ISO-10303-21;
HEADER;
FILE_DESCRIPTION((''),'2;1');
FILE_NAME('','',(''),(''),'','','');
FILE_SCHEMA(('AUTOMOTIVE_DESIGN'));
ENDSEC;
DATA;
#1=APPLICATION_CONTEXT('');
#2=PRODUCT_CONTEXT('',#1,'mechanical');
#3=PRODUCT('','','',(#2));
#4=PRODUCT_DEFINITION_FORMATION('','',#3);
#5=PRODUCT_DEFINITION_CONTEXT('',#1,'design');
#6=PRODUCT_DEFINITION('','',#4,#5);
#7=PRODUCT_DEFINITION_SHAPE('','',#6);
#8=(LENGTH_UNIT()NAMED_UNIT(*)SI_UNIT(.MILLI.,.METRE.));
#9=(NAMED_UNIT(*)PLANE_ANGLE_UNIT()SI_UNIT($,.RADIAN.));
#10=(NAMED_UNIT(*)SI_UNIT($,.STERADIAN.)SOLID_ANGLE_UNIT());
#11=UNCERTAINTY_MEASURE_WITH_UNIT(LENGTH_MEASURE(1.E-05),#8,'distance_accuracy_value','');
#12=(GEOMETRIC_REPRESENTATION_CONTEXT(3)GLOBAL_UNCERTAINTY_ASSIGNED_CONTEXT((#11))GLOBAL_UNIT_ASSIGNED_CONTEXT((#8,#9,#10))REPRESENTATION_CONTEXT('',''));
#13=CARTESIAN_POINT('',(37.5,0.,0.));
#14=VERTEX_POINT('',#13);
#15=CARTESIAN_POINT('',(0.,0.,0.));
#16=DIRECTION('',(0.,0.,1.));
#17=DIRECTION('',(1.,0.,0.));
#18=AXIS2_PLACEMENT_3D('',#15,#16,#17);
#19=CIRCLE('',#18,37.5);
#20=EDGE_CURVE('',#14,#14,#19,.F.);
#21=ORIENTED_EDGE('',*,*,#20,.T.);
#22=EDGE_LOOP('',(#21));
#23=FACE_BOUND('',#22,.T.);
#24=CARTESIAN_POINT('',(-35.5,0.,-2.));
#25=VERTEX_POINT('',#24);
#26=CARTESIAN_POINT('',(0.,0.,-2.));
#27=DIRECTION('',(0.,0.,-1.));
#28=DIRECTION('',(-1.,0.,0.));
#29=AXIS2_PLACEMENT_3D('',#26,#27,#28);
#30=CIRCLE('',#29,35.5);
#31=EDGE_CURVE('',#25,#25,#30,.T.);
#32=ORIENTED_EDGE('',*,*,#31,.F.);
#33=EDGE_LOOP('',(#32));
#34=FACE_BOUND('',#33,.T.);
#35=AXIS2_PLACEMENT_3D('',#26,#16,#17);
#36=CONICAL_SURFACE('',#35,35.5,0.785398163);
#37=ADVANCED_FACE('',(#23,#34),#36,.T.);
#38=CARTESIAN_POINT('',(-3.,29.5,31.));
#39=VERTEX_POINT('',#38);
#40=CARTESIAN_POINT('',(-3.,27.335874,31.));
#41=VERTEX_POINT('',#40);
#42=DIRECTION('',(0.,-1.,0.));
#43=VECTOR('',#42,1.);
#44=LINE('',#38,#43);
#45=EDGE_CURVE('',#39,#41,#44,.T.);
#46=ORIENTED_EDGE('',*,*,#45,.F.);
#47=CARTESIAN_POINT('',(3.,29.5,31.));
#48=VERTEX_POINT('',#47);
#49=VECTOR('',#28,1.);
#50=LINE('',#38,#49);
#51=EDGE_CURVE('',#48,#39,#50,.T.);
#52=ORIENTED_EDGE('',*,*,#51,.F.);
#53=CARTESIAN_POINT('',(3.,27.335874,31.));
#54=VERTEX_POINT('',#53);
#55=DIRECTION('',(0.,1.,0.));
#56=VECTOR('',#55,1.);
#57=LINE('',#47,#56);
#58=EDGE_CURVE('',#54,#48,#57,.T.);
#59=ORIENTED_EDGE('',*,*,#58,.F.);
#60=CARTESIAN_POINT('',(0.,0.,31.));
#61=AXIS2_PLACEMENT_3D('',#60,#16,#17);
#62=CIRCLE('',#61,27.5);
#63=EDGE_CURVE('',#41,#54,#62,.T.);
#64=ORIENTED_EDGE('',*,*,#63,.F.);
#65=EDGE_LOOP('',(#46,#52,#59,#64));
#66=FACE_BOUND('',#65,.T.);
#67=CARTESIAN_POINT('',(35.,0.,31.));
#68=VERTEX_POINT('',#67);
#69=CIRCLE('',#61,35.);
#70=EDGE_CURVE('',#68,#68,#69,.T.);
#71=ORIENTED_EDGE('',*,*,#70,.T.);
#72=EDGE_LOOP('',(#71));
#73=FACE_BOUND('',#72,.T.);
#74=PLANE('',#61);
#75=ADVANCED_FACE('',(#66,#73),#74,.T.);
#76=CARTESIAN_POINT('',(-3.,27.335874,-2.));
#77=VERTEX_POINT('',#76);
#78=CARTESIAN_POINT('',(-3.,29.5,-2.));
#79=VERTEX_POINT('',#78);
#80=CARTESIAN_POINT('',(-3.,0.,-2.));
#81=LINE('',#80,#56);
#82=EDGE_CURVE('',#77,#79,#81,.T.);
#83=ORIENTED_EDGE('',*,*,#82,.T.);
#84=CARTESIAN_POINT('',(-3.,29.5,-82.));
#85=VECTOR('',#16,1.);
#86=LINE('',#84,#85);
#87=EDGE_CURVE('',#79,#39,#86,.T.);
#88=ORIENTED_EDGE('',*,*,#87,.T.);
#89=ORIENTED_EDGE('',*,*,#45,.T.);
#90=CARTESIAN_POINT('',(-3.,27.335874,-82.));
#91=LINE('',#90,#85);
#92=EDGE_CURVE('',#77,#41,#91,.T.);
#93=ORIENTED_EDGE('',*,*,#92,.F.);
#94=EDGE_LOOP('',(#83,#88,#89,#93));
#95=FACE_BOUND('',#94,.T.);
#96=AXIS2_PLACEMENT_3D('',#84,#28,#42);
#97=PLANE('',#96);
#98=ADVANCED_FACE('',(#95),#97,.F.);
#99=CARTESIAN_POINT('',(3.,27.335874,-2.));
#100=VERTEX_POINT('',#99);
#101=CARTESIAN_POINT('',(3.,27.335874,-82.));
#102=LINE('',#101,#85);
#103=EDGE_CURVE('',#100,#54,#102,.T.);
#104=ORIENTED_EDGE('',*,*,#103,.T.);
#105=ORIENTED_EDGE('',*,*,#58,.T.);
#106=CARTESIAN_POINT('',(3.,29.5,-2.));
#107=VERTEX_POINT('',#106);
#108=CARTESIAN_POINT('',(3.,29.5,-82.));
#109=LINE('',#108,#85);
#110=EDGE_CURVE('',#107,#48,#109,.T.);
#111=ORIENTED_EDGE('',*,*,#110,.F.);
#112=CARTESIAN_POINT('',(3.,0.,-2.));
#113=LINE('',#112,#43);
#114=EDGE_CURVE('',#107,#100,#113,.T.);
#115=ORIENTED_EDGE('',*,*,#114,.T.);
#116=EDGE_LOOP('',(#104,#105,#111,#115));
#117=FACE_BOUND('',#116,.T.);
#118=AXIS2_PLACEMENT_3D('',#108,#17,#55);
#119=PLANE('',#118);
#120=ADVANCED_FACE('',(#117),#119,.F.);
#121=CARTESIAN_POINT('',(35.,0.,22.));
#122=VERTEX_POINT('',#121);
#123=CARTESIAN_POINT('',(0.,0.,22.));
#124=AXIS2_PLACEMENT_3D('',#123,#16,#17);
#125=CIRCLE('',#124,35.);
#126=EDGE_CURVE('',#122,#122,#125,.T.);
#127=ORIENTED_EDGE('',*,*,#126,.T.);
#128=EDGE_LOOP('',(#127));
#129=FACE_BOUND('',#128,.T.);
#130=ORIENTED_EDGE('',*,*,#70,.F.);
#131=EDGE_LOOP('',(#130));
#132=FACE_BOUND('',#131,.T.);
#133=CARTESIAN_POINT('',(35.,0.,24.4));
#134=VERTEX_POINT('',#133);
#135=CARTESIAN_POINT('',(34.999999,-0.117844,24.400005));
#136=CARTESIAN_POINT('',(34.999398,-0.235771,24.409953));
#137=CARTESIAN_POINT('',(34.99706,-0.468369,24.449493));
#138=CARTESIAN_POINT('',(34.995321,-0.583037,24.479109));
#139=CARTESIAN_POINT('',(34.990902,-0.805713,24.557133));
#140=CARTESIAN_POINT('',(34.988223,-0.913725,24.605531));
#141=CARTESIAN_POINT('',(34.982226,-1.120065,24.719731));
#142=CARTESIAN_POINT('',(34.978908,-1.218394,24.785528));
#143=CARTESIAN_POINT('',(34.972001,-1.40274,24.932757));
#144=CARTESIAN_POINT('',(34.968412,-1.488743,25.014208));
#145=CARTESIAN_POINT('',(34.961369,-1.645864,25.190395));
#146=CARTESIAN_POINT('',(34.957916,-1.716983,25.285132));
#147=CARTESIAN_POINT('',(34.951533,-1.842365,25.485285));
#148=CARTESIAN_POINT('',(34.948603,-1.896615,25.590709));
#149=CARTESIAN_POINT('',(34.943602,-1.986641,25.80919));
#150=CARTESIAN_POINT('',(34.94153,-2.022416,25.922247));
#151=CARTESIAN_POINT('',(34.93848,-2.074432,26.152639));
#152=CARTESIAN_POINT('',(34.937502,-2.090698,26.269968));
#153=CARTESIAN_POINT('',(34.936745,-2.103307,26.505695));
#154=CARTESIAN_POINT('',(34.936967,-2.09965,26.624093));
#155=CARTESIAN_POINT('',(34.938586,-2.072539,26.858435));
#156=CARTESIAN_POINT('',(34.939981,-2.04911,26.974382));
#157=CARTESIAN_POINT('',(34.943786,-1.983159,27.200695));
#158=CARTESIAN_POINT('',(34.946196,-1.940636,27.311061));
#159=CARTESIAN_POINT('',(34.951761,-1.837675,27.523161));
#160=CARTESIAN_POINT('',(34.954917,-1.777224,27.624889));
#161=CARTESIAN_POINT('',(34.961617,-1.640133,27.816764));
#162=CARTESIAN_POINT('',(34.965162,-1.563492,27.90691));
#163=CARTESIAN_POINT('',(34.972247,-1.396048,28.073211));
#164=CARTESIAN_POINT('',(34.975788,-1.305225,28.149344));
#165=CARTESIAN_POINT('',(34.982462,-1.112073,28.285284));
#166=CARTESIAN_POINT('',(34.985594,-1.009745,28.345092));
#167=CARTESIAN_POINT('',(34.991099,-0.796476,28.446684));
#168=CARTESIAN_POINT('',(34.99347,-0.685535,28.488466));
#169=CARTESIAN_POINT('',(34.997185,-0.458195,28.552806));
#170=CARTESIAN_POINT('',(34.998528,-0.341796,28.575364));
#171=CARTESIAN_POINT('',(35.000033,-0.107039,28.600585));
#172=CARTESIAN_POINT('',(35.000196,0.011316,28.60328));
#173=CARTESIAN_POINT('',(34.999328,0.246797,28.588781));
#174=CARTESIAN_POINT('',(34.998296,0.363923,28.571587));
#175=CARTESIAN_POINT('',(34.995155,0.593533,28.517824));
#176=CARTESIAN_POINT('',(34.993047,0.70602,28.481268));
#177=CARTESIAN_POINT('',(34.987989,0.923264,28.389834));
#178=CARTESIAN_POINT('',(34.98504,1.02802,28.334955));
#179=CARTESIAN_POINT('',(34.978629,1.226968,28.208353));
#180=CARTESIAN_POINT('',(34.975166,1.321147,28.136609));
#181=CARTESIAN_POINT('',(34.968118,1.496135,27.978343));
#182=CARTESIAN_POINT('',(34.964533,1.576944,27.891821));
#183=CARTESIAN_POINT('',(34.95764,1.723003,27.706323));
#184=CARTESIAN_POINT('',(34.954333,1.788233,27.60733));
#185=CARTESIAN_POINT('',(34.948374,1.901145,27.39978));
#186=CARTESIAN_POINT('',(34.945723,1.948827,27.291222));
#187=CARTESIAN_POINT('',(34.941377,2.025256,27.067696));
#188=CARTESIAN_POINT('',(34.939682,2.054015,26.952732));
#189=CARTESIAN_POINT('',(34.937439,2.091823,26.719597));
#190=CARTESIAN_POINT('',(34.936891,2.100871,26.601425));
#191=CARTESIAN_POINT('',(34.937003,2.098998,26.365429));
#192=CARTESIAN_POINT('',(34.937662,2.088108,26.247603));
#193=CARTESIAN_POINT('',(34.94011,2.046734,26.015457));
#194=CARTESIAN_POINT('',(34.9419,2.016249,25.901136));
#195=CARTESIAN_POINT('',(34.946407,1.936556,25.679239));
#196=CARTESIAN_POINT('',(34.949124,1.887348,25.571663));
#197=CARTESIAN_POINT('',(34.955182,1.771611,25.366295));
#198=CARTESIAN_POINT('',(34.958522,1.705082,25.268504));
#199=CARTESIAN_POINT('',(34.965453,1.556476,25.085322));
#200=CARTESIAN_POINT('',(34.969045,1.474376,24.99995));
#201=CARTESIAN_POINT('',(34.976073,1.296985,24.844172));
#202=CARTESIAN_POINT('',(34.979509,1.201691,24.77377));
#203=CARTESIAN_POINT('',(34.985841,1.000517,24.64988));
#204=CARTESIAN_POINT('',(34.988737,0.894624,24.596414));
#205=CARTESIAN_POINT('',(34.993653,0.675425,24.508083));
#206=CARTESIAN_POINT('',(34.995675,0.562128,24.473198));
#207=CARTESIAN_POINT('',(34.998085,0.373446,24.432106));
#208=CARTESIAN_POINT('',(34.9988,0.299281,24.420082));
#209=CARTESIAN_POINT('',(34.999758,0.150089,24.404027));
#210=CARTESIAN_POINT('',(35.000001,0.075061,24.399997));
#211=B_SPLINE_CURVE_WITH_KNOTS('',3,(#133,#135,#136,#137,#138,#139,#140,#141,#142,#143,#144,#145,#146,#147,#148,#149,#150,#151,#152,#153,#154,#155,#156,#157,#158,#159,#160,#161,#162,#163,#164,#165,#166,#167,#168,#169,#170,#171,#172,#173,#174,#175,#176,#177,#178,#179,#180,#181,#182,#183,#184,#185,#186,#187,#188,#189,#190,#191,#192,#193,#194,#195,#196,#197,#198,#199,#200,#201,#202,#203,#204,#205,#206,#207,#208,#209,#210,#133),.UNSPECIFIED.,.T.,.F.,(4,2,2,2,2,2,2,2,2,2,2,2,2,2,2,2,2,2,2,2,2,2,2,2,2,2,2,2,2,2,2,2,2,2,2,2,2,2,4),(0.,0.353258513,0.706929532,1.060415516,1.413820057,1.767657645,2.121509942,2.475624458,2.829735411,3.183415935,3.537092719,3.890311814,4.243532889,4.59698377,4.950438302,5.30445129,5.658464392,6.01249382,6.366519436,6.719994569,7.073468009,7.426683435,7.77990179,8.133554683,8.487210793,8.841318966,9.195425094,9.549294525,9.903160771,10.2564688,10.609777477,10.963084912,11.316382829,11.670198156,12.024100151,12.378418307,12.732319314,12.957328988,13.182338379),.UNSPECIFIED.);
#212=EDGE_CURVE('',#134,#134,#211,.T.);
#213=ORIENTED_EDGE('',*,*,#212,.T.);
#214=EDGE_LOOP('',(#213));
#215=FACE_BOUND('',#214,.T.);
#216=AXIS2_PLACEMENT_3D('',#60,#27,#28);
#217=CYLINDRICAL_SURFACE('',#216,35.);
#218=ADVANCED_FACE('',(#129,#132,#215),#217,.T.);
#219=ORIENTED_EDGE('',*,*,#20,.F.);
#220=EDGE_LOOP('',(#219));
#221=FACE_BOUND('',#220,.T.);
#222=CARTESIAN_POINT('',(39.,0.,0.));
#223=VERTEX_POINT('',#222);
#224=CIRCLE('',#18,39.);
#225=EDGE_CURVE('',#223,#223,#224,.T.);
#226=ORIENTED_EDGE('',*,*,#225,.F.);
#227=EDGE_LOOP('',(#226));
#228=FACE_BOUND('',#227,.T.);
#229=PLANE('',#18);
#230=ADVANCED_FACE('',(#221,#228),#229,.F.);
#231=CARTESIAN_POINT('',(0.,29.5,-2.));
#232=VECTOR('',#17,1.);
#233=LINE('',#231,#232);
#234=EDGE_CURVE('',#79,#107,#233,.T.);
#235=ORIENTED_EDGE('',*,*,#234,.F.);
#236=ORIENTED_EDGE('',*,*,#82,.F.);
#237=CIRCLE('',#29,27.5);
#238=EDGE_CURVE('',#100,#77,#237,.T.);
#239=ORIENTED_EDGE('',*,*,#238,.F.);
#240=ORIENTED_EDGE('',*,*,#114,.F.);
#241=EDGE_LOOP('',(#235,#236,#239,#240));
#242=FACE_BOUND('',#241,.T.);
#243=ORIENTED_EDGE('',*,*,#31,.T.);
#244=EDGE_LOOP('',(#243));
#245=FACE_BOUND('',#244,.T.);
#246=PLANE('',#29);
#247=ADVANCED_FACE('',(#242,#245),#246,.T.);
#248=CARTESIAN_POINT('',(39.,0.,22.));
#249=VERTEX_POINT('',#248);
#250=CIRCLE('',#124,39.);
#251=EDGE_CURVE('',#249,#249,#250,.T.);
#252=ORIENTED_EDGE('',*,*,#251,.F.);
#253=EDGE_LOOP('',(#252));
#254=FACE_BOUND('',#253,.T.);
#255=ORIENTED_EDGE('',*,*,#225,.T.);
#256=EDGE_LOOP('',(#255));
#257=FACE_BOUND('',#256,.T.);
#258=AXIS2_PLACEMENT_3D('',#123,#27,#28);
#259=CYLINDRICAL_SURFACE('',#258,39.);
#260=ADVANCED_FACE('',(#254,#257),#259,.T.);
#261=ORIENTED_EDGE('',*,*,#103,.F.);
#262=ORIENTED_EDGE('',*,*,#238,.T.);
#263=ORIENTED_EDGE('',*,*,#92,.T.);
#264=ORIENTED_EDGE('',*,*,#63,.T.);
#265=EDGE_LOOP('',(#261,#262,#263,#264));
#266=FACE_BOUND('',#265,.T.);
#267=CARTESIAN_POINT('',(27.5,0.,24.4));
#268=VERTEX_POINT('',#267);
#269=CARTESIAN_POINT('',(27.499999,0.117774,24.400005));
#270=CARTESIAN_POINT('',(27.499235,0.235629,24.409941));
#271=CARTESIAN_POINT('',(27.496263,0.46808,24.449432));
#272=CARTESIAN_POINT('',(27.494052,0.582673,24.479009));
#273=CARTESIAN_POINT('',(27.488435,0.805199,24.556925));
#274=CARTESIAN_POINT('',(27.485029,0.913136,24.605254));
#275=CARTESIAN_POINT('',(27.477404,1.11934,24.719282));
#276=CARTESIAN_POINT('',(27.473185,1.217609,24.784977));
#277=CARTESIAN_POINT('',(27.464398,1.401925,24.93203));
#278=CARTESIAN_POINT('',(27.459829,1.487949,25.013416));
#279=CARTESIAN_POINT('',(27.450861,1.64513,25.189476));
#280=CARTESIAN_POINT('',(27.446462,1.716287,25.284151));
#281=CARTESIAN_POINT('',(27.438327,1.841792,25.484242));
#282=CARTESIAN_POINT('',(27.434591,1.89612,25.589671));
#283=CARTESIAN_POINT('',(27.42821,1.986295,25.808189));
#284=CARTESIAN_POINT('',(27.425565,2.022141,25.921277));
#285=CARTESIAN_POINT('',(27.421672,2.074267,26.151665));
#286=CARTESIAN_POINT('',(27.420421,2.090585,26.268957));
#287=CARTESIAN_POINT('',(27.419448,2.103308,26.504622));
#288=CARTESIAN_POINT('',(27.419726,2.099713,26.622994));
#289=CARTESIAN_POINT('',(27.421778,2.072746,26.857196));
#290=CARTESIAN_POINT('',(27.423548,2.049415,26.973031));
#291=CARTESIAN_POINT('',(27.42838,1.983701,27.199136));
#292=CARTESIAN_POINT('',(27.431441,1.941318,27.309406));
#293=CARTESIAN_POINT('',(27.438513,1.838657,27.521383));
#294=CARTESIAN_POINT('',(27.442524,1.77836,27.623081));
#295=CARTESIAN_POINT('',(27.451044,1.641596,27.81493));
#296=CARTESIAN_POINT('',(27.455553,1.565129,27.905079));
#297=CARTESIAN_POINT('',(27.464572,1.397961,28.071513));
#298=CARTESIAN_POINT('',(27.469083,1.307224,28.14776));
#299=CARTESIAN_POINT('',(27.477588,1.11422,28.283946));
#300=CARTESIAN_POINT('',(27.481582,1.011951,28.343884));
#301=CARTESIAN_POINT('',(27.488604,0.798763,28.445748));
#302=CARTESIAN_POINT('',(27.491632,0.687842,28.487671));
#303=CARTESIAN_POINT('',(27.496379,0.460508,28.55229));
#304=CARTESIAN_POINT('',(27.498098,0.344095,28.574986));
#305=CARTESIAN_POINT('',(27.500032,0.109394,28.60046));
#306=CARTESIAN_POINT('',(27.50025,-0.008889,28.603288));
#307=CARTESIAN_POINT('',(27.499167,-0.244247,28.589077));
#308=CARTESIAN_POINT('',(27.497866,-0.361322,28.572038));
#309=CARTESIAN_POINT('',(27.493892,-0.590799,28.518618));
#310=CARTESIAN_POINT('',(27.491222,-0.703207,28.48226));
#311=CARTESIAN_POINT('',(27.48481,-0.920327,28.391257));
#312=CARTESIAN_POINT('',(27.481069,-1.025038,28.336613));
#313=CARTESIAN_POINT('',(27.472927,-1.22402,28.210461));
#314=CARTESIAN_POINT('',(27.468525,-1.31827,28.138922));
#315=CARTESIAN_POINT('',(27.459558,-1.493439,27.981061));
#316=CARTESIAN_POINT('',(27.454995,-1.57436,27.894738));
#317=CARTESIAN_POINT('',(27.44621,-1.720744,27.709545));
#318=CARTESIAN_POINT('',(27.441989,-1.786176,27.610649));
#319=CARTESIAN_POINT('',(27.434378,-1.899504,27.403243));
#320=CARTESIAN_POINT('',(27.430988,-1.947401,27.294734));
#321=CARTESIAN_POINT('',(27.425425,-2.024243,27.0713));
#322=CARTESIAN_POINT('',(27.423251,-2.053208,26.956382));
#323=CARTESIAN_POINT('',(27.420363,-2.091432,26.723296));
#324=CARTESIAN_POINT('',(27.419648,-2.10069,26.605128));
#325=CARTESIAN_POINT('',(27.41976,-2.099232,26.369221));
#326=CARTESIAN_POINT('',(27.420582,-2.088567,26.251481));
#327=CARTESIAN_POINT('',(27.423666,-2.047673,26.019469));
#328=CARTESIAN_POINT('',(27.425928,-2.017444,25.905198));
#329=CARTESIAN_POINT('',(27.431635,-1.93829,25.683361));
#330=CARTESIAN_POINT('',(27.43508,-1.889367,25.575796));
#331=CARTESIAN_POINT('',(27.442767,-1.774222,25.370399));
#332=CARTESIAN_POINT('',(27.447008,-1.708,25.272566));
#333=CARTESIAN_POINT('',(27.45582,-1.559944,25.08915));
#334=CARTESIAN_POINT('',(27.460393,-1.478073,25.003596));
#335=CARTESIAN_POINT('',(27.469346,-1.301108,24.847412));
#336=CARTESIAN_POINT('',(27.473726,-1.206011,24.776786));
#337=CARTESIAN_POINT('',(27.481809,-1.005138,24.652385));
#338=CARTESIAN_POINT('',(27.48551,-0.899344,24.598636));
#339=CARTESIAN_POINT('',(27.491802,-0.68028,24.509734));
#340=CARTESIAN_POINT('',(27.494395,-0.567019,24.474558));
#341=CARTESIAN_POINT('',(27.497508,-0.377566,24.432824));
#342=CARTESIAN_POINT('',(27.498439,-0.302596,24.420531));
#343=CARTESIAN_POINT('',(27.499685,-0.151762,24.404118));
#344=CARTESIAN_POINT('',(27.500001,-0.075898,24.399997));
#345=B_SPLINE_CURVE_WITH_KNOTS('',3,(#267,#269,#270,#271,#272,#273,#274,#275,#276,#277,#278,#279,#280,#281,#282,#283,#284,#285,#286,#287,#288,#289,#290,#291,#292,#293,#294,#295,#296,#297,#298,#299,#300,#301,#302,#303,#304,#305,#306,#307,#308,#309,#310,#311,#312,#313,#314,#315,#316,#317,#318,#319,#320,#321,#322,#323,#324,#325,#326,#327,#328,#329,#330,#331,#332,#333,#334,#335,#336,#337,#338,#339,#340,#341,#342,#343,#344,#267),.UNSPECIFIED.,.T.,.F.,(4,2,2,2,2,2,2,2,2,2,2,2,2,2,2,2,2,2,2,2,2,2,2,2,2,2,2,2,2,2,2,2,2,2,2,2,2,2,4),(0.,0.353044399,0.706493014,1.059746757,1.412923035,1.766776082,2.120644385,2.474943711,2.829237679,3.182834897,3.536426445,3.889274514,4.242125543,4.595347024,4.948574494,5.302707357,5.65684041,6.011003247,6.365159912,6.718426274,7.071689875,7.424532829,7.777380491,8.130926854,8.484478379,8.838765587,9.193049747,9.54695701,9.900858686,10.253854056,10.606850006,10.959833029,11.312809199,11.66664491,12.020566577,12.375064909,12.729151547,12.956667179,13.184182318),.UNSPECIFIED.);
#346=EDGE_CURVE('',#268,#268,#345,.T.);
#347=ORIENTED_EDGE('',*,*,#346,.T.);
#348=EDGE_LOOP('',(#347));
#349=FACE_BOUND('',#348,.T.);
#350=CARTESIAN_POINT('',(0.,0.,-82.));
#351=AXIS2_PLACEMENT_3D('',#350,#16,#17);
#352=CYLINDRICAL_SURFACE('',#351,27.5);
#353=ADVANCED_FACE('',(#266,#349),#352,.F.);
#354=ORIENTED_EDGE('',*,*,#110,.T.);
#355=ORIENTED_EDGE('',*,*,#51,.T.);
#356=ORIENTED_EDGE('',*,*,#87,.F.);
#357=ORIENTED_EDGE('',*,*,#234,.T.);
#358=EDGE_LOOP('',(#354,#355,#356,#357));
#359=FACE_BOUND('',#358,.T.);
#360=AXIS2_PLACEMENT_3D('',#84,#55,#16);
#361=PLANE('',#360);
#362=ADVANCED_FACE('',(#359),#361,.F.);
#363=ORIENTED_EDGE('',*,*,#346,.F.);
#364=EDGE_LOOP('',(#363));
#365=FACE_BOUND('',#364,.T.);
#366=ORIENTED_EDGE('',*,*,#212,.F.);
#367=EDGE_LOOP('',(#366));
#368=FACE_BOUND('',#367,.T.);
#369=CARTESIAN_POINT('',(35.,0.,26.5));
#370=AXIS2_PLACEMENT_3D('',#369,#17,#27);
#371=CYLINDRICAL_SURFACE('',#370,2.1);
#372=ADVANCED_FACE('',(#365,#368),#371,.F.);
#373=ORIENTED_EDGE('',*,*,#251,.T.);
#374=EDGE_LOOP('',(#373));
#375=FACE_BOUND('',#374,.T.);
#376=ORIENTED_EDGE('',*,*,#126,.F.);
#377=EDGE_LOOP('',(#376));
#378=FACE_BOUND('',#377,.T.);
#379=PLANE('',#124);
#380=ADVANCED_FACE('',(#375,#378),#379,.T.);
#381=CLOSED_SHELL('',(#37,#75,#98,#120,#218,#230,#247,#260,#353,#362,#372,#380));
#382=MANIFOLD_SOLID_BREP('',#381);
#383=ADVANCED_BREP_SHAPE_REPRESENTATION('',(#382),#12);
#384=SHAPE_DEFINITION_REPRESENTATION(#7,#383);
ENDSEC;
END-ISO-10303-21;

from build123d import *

# Parameters (mm, degrees)
SKETCH1_R             = 39
EXTRUDE1_DEPTH        = 22
SKETCH2_R             = 35
EXTRUDE2_DEPTH        = 9
SKETCH4_R             = 37.5
EXTRUDE4_DEPTH        = 2
EXTRUDE3_DEPTH        = 113
CHAMFER1_SIZE         = 2
M5_TAPPED_HOLE6_D     = 4.2
M5_TAPPED_HOLE6_DEPTH = 24
M5_TAPPED_HOLE6_TIP   = 1.2618073


with BuildPart() as part:
    # Sketch1 → Extrude1 (new body)
    with BuildSketch(Plane.XY):
        Circle(SKETCH1_R)
    extrude(amount=EXTRUDE1_DEPTH)

    # Sketch2 → Extrude2 (add)
    with BuildSketch(Plane.XY.offset(22)):
        Circle(SKETCH2_R)
    extrude(amount=EXTRUDE2_DEPTH)

    # Sketch4 → Extrude4 (add)
    with BuildSketch(Plane(origin=(0, 0, 0), x_dir=(-1, 0, 0), z_dir=(0, 0, -1))):
        with Locations(Location((0, 0, 0), (0, 0, 180))):
            Circle(SKETCH4_R)
    extrude(amount=EXTRUDE4_DEPTH)

    # Sketch3 → Extrude3 (cut)
    with BuildSketch(Plane.XY.offset(31)):
        with BuildLine():
            Line((-3, 29.5), (3, 29.5))
            Line((3, 29.5), (3, 27.335873866))
            ThreePointArc((3, 27.335873866), (0, -27.5), (-3, 27.335873866))
            Line((-3, 27.335873866), (-3, 29.5))
        make_face()
    extrude(amount=-EXTRUDE3_DEPTH, mode=Mode.SUBTRACT)

    # Chamfer1
    chamfer1_edges = [part.edges().sort_by_distance(p)[0] for p in [
        (-37.5, 0, -2),
    ]]
    chamfer(chamfer1_edges, length=CHAMFER1_SIZE - 0.0001)  # a hair under: the kernel refuses the full size

    # M5 Tapped Hole6
    with Locations(Plane(origin=(35, 0, 26.5), x_dir=(0, 1, 0), z_dir=(1, 0, 0))):
        with Locations((0, 0)):
            Hole(M5_TAPPED_HOLE6_D / 2, depth=M5_TAPPED_HOLE6_DEPTH)
            with Locations((0, 0, -(M5_TAPPED_HOLE6_DEPTH + M5_TAPPED_HOLE6_TIP / 2))):  # 118° drill point
                Cone(0, M5_TAPPED_HOLE6_D / 2, M5_TAPPED_HOLE6_TIP, mode=Mode.SUBTRACT)


solid = part.part
